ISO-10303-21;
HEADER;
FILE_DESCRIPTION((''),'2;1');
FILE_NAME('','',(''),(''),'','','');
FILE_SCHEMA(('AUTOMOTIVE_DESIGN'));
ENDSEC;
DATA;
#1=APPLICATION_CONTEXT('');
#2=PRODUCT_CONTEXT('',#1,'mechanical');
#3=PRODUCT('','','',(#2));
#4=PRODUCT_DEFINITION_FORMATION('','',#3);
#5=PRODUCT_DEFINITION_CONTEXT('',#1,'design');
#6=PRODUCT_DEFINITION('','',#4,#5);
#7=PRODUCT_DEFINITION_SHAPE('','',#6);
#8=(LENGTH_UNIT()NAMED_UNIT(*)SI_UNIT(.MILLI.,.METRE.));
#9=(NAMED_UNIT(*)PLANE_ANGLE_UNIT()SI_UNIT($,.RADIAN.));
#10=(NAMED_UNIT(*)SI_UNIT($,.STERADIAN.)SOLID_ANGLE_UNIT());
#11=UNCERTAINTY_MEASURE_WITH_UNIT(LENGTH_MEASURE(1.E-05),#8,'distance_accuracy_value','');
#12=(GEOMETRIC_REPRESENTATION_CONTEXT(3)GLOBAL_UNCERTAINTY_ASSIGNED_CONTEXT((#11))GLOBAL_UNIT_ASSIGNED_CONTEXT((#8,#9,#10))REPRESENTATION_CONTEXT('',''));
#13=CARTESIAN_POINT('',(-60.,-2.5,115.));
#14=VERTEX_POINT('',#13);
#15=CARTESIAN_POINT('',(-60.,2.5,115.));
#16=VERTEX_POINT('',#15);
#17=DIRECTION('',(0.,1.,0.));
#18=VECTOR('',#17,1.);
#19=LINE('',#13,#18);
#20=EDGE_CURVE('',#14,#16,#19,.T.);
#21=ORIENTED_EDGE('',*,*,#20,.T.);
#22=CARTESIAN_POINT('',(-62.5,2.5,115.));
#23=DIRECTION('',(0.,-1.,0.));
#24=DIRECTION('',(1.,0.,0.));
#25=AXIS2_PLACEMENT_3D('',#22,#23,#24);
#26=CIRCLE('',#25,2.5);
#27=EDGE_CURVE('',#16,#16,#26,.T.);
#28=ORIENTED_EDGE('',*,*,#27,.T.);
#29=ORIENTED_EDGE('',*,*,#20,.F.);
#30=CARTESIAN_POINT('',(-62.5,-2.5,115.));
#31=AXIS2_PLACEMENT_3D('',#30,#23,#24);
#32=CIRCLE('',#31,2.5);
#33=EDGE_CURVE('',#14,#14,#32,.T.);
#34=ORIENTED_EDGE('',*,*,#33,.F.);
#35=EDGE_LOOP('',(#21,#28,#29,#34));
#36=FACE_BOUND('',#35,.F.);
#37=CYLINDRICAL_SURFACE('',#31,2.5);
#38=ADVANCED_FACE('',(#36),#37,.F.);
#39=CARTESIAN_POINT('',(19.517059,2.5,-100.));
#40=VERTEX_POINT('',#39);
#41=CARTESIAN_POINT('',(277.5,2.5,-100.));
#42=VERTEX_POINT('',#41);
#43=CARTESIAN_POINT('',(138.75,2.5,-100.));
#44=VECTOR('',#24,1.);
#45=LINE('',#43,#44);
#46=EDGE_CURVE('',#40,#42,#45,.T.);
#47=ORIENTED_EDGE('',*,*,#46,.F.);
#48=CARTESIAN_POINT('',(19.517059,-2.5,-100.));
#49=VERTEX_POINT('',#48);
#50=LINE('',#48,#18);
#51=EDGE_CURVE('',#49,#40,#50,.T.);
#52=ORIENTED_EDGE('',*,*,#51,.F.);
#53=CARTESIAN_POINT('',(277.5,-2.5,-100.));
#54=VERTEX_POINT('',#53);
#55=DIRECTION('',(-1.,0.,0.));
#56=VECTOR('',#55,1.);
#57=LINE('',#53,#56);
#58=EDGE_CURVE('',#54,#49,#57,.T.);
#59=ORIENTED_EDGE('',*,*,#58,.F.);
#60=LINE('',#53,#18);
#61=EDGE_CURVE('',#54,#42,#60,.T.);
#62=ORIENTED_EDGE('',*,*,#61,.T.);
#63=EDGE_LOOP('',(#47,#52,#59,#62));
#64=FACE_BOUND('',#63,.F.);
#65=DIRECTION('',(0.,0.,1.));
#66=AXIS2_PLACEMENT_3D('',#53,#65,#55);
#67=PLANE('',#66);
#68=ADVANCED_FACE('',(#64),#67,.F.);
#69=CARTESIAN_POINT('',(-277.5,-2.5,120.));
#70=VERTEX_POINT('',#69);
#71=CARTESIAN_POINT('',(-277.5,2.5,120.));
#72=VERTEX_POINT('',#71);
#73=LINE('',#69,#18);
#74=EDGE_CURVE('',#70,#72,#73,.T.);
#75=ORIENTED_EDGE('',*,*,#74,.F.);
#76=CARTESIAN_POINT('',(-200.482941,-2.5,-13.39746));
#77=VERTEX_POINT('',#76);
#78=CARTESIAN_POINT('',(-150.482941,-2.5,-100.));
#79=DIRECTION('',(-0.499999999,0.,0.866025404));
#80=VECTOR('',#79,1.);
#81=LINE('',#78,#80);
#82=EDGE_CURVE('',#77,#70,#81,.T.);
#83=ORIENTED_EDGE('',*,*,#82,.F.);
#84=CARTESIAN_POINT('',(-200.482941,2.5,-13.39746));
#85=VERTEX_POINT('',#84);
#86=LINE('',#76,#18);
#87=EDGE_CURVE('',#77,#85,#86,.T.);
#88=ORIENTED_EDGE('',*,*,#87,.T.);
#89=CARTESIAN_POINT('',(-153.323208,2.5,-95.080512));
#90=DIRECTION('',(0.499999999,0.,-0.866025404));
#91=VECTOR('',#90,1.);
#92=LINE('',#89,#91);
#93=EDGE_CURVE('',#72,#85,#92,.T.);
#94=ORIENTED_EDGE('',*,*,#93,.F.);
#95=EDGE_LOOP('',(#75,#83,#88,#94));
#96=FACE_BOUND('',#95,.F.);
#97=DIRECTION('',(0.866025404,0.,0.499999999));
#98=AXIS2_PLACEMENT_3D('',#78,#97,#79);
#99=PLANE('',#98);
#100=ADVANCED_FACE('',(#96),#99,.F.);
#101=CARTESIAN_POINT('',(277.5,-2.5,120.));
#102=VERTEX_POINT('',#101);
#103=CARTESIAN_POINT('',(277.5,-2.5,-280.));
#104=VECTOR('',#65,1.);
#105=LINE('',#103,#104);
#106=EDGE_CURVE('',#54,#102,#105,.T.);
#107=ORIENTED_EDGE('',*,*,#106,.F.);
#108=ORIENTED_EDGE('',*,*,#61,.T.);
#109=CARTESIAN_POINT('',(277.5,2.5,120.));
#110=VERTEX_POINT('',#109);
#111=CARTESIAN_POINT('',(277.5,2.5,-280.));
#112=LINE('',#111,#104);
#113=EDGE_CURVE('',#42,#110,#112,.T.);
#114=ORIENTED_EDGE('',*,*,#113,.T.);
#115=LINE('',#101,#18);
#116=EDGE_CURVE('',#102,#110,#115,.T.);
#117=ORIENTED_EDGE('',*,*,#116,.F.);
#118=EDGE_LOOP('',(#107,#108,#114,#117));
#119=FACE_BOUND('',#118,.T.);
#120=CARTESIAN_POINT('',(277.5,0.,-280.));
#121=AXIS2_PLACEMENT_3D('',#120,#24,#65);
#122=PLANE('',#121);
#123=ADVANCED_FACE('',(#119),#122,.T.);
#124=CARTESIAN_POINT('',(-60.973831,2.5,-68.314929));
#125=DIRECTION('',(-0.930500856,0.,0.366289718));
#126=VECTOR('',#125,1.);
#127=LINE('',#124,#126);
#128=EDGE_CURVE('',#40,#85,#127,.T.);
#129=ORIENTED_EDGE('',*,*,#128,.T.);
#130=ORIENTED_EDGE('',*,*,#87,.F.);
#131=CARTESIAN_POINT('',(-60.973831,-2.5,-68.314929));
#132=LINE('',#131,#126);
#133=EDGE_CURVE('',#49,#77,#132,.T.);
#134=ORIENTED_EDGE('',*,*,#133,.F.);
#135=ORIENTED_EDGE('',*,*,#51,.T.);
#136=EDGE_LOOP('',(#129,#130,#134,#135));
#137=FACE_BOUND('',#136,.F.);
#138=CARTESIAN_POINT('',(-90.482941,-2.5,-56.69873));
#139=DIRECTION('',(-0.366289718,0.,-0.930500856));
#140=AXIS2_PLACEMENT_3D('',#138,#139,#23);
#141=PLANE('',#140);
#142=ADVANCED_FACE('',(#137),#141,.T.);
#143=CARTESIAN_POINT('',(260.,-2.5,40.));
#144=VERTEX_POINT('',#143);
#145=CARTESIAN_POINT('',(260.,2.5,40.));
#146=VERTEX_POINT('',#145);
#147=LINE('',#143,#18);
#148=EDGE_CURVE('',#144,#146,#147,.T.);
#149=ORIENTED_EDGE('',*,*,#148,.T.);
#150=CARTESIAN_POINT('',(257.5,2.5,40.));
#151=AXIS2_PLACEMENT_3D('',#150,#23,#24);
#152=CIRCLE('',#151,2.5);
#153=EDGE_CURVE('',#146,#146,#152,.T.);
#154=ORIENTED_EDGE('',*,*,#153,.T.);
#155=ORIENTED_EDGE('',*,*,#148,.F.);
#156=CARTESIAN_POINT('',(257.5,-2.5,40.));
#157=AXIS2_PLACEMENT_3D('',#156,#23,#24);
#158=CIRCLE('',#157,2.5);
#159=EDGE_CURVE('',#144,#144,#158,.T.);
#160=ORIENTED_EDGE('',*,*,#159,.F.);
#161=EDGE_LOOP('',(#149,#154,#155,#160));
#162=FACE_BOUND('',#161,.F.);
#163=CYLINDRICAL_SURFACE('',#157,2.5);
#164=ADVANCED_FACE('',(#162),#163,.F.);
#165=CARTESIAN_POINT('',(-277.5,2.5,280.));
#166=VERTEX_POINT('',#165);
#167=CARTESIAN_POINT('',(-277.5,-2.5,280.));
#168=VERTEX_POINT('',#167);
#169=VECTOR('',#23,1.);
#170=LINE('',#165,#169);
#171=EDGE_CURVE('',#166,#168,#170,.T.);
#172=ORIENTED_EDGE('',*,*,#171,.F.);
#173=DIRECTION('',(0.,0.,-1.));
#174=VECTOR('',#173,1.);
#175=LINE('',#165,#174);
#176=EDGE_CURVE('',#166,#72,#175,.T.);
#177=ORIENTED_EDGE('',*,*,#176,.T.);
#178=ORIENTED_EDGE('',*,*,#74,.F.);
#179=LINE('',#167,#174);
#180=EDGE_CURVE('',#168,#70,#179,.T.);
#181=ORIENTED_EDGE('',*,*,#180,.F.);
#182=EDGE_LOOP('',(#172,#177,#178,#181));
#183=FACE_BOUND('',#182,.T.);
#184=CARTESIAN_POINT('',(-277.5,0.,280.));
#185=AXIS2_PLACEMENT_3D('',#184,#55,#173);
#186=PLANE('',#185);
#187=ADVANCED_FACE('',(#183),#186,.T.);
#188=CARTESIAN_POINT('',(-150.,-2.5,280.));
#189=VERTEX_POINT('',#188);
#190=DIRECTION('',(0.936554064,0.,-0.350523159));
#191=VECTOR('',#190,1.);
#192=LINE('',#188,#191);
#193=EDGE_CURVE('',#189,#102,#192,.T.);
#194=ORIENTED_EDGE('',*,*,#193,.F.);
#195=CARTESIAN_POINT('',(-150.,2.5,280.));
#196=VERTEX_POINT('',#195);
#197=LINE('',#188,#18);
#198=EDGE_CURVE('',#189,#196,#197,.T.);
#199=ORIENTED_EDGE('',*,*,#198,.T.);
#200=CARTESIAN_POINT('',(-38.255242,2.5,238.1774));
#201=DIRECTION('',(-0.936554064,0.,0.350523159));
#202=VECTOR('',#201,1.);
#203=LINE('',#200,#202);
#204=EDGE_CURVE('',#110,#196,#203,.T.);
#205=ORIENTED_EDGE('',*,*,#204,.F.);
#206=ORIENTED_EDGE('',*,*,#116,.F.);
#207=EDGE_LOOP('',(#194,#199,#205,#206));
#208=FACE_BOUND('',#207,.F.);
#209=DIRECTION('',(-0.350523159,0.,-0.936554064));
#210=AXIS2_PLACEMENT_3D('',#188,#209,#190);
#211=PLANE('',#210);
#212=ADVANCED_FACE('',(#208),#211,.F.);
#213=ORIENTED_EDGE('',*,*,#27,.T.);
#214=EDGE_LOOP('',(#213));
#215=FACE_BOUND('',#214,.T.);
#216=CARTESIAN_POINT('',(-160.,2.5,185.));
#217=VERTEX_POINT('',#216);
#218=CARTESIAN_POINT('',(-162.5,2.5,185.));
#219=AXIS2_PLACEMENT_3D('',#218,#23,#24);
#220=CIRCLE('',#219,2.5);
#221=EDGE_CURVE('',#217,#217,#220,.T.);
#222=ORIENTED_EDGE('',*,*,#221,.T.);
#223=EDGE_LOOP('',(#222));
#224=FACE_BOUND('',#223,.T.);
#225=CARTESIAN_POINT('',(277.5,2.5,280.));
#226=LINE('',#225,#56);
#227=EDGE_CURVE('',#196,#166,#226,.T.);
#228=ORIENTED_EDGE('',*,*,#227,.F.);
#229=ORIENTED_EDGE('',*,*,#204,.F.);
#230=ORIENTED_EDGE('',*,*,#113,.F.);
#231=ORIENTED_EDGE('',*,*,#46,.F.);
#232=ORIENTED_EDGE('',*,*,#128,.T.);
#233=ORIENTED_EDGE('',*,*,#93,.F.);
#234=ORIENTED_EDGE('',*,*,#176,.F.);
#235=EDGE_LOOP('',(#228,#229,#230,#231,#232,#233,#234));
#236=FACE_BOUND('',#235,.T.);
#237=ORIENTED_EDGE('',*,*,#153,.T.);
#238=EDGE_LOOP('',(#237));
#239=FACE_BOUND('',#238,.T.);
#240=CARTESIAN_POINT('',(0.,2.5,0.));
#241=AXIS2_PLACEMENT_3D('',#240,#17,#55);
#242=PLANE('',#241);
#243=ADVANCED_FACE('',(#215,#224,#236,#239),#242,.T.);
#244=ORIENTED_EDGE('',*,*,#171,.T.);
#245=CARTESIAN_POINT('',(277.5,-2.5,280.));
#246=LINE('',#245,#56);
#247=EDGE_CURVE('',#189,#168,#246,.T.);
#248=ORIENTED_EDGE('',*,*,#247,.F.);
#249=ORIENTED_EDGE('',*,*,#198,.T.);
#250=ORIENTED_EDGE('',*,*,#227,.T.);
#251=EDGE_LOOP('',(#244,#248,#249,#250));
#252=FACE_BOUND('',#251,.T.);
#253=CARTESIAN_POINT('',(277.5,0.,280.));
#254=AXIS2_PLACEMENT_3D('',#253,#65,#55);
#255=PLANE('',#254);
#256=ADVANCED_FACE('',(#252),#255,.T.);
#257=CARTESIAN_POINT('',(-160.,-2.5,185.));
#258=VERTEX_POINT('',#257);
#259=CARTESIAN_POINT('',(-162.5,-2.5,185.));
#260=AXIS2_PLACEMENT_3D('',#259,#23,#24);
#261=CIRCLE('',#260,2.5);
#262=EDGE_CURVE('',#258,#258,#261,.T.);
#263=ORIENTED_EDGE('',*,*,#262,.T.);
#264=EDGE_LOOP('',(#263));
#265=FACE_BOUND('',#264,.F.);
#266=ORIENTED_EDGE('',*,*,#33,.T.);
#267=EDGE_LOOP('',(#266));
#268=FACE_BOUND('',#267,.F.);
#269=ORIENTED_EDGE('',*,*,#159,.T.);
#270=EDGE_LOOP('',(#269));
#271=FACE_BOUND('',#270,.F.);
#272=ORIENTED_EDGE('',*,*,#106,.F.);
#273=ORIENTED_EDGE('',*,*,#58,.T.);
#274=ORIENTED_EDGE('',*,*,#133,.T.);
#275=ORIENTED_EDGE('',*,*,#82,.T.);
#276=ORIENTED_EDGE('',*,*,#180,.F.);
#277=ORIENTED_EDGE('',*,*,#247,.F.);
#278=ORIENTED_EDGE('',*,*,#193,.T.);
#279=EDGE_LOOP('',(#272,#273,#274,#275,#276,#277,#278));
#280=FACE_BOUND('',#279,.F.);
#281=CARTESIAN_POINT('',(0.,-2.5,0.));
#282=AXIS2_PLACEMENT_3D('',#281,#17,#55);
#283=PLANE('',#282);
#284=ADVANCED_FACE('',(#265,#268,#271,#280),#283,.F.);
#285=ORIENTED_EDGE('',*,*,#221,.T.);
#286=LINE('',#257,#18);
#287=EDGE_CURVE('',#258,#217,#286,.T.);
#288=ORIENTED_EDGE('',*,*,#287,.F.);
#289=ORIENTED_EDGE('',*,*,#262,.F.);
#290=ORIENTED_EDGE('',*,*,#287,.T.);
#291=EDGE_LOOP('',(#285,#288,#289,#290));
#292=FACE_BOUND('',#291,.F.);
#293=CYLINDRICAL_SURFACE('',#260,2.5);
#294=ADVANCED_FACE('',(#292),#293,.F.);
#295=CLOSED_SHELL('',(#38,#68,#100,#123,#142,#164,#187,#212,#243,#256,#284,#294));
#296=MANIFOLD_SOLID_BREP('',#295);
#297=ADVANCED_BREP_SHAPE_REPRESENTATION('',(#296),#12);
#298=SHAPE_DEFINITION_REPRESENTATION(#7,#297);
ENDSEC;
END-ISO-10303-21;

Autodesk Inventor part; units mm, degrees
ref_plane "YZ Plane" through (0, 0, 0) normal (1, 0, 0) x (0, 1, 0)
ref_plane "XZ Plane" through (0, 0, 0) normal (0, 1, 0) x (-1, 0, 0)
ref_plane "XY Plane" through (0, 0, 0) normal (0, 0, 1) x (1, 0, 0)
sketch "スケッチ1" plane through (0, 0, 0) normal (0, 1, 0) x (-1, 0, 0)
  line L0 (-277.5, 280) -> (277.5, 280)
  line L1 (277.5, 280) -> (277.5, -280)
  line L2 (277.5, -280) -> (-277.5, -280)
  line L3 (-277.5, -280) -> (-277.5, 280)
  line L4 (-277.5, 280) -> (277.5, -280) construction
  line L5 (277.5, 280) -> (-277.5, -280) construction
  point P0 (0, 0)
  dimension "d0" = 555
  dimension "d1" = 560
extrude "押し出し1" add sketch "スケッチ1" along normal mid plane 5
sketch "スケッチ3" plane through (0, -2.5, 0) normal (0, -1, 0) x (1, 0, 0)
  circle A0 centre (-62.5, 115) radius 2.5
  line L0 (277.5, -280) -> (277.5, 280) projected
  line L1 (-277.5, -280) -> (277.5, -280) projected
  circle A1 centre (-162.5, 185) radius 2.5
  circle A2 centre (257.5, 40) radius 2.5
  point P0 (0, 0)
  dimension "d10" = 5
  dimension "d15" = 5
  dimension "d16" = 320
  dimension "d17" = 20
  dimension "d18" = 5
  dimension "d24" = 75
  dimension "d25" = 320
  dimension "d26" = 420
  dimension "d27" = 145
extrude "押し出し4" cut sketch "スケッチ3" against normal through all
sketch "スケッチ5" plane through (0, -2.5, 0) normal (0, -1, 0) x (1, 0, 0)
  line L0 (277.5, 250) -> (-277.5, 250)
  line L1 (-250, 280) -> (-250, -280) construction
  line L2 (-277.5, -250) -> (277.5, -250)
  line L3 (250, -280) -> (250, 280) construction
  line L4 (-277.5, 280) -> (277.5, 280)
  line L5 (-150, 280) -> (277.5, 120)
  line L6 (277.5, 280) -> (277.5, -280)
  line L7 (-277.5, -280) -> (-277.5, 280)
  line L8 (-277.5, 120) -> (-150.482941, -100)
  line L9 (-150.482941, -100) -> (277.5, -100)
  line L10 (277.5, -280) -> (277.5, 280)
  point P0 (0, 0)
  dimension "d32" = 100
  dimension "d33" = 130
  dimension "d34" = 350
  dimension "d35" = 60
  dimension "d46" = 220
sketch "スケッチ5 outline for 押し出し5" plane through (0, -2.5, 0) normal (0, -1, 0) x (1, 0, 0)
  line L0 (277.5, 120) -> (277.5, 280)
  line L1 (-150, 280) -> (277.5, 120)
  line L2 (277.5, 280) -> (-150, 280)
  line L3 (-277.5, 120) -> (-277.5, -280)
  line L4 (-150.482941, -100) -> (-277.5, 120)
  line L5 (277.5, -100) -> (-150.482941, -100)
  line L6 (277.5, -280) -> (277.5, -100)
  line L7 (-277.5, -280) -> (277.5, -280)
extrude "押し出し5" cut sketch "スケッチ5 outline for 押し出し5" against normal through all
chamfer "面取り2" distance 170 distance2 100 1 edges at (-150.4829, 0, -100) measured on face at (134.839, -0.8333, -100)
properties part number "endplate"
